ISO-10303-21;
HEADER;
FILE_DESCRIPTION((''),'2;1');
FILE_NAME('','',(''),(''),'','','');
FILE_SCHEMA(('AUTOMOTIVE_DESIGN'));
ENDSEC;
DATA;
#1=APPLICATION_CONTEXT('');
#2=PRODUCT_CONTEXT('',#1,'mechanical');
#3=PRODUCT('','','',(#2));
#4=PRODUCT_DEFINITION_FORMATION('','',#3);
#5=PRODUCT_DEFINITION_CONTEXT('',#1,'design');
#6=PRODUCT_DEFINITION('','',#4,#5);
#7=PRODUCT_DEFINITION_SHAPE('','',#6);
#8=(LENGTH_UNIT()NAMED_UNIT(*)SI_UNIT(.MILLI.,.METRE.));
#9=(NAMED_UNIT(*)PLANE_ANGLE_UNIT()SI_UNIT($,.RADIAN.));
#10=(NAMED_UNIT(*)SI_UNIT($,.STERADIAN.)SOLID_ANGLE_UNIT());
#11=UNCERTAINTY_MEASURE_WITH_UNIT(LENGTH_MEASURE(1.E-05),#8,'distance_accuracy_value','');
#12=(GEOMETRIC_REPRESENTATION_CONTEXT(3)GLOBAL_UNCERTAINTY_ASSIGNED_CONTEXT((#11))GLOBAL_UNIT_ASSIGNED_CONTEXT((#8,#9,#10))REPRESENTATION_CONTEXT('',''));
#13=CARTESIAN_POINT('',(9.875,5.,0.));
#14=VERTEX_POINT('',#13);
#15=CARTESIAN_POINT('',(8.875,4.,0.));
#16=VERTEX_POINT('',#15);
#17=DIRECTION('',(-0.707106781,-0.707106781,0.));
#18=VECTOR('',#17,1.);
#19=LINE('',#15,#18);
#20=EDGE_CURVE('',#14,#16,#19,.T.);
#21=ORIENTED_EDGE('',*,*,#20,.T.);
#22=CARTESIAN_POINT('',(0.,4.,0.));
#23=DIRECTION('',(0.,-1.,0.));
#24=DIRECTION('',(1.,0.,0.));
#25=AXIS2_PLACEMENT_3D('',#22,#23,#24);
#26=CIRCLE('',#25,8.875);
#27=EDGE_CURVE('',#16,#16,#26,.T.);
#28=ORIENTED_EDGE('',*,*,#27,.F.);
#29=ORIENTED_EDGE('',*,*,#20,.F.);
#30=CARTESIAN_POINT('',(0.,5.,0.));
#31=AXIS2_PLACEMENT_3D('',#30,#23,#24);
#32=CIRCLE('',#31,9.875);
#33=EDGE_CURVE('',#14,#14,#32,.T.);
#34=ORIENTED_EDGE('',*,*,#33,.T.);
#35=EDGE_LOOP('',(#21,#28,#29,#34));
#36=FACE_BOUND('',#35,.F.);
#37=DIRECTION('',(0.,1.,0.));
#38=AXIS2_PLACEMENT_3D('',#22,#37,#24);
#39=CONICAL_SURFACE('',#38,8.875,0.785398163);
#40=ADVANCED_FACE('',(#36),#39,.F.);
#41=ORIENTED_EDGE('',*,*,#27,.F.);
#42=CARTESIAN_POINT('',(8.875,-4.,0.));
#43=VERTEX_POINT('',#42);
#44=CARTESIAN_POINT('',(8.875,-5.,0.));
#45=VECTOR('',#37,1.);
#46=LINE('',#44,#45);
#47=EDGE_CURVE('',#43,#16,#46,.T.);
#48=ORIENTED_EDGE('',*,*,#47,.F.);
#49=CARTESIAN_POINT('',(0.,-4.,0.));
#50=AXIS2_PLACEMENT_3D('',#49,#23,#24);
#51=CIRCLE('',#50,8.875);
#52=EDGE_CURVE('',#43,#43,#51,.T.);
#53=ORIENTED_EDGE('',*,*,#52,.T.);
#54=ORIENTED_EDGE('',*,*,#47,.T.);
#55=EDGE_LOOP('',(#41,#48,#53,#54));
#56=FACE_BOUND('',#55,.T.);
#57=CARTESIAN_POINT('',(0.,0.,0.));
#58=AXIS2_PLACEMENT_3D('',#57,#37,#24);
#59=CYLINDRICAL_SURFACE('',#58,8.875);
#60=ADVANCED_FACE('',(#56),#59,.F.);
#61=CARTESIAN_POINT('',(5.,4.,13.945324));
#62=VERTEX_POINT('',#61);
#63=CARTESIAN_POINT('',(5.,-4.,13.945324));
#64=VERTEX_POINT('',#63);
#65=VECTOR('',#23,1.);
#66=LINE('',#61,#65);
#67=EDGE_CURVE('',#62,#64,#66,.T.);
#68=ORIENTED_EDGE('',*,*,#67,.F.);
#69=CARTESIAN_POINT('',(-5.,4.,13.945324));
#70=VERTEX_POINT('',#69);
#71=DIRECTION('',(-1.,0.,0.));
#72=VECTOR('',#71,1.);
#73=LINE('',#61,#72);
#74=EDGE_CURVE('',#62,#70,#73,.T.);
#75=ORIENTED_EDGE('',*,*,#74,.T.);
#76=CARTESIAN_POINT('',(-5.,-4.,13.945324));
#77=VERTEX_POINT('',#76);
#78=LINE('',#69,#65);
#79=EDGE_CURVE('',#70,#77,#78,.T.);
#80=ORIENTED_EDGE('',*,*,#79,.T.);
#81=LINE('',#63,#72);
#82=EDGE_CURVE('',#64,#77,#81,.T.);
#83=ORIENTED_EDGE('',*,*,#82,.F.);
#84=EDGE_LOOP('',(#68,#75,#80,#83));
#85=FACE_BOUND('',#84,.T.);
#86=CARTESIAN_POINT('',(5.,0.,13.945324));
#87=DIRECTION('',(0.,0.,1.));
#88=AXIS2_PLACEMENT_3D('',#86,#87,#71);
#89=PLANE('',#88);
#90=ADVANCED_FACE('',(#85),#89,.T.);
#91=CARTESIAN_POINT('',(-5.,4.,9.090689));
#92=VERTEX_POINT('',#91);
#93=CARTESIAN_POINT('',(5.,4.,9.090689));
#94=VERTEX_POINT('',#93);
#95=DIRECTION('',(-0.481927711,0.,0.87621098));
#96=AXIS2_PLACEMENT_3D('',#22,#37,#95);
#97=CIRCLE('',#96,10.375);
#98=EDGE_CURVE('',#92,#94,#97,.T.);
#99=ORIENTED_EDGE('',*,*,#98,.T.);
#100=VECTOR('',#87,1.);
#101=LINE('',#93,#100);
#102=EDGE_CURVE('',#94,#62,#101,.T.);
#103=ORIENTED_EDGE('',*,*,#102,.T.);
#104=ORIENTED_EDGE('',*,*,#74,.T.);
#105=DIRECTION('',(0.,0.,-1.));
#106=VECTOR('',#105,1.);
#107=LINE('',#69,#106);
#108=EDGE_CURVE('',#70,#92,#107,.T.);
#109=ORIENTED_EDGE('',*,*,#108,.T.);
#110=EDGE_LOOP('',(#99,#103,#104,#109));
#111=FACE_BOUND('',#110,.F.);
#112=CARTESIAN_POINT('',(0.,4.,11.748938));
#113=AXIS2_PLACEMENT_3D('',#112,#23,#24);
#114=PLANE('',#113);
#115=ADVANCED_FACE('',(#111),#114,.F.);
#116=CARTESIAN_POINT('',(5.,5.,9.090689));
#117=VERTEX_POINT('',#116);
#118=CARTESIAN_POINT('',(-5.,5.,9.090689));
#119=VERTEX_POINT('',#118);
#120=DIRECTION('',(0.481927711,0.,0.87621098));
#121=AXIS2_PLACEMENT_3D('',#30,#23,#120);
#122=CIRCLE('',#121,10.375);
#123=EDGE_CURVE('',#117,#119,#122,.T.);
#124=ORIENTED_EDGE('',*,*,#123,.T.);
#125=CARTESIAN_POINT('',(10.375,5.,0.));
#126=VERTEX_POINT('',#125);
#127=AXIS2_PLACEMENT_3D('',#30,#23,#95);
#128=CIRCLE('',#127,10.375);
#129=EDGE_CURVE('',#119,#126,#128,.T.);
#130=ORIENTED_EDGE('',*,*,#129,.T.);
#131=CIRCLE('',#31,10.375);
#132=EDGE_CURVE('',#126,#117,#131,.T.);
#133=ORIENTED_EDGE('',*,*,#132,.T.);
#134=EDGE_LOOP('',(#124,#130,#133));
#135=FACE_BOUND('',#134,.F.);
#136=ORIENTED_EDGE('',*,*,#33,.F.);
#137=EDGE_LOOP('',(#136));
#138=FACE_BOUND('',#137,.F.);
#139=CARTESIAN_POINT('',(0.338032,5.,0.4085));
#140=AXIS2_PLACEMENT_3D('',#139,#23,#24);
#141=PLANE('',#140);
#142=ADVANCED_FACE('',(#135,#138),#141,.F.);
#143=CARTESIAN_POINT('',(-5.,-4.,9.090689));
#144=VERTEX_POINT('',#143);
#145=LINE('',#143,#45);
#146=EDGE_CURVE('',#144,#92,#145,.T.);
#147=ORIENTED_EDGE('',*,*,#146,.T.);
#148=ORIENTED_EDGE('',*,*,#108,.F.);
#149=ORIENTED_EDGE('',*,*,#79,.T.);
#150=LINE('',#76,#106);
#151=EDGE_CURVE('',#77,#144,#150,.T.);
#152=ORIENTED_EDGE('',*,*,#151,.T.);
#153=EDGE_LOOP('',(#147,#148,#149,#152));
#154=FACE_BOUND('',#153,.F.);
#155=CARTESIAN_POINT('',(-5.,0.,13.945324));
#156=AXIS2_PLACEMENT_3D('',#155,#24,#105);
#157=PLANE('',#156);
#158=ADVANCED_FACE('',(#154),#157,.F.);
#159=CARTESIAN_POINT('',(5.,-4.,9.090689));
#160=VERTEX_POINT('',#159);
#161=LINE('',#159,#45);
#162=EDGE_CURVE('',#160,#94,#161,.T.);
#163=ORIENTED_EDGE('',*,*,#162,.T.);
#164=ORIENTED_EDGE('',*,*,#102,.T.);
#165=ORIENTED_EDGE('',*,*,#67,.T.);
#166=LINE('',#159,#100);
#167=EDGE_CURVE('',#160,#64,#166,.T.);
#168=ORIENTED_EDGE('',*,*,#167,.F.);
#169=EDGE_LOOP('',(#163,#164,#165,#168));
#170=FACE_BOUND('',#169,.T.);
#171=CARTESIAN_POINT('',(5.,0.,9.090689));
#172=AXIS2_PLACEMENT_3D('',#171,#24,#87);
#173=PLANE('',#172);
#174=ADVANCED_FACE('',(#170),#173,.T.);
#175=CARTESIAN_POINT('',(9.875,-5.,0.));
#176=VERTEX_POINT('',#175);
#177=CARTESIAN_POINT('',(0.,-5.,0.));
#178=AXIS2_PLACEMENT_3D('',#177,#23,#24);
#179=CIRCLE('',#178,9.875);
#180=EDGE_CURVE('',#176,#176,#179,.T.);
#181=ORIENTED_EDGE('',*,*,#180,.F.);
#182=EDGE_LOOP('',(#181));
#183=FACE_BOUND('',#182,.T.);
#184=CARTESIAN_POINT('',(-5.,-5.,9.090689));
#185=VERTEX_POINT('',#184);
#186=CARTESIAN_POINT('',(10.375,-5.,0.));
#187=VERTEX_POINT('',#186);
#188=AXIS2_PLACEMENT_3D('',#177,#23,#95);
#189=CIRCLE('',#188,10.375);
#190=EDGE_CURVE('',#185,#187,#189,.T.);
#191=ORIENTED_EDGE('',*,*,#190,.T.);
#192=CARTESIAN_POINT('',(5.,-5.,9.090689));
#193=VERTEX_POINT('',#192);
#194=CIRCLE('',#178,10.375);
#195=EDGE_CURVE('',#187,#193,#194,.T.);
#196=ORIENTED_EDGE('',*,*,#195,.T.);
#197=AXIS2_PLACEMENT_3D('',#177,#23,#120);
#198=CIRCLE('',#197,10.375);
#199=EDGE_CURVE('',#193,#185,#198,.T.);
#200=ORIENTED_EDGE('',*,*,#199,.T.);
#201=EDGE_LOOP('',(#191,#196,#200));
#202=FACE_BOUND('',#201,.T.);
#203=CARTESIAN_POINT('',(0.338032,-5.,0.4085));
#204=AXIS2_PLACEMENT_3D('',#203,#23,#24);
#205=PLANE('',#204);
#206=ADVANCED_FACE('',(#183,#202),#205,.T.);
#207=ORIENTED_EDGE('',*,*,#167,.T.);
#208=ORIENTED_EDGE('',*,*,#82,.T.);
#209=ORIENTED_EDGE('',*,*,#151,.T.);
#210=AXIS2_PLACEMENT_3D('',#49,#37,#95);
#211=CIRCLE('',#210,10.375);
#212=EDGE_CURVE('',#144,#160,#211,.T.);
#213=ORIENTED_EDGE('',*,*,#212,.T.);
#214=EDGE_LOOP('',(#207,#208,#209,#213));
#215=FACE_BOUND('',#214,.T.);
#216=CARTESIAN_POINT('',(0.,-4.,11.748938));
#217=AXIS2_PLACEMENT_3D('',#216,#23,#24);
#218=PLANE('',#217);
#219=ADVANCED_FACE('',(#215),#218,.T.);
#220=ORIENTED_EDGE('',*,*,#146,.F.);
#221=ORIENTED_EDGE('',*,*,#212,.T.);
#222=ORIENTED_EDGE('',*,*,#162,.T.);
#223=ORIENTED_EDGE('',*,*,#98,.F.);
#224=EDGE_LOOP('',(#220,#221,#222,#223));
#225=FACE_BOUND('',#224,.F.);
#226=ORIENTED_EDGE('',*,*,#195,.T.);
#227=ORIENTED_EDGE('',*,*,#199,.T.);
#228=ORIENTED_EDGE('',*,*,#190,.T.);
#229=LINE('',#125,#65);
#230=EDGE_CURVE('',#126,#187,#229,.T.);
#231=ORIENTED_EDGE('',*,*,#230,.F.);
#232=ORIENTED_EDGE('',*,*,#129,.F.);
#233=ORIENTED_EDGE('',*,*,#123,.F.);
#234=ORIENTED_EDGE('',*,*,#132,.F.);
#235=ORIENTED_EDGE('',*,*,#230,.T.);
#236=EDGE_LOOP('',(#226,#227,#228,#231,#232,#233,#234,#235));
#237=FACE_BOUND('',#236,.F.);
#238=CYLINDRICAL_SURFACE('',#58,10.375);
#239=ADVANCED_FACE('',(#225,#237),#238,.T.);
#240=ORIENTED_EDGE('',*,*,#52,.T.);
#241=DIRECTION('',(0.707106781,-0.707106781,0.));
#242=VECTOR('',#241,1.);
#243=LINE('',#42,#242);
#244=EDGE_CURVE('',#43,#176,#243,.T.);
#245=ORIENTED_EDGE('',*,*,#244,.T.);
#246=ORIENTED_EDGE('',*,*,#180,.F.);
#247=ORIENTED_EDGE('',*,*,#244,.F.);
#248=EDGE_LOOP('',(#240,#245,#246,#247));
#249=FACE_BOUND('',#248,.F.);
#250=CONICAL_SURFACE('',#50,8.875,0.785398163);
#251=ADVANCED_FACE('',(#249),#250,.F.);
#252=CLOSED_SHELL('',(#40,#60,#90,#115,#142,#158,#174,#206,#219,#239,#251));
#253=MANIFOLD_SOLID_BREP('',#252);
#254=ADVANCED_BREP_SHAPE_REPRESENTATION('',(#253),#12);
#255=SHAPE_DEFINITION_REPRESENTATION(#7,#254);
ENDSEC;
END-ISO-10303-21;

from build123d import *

# Parameters (mm, degrees)
F0_R          = 8.875
F1_DEPTH      = 5
F1_DEPTH_BACK = 5
F2_DEPTH      = 4
F2_DEPTH_BACK = 4
F3_SIZE       = 1


# Not quite as in the source:
# - a feature names something its author has since deleted; it is built from what else it names


with BuildPart() as f1:
    # F0 (on Front) → F1 (new body, two sides)
    with BuildSketch(Plane.XZ) as f1_sk:
        with BuildLine():
            ThreePointArc((-5, 9.0906889178), (-5.2804178338, -8.9307229551), (10.375, 0))
            ThreePointArc((10.375, 0), (8.9307229551, 5.2804178338), (5, 9.0906889178))
            Line((5, 9.0906889178), (5, 8.9453239366))
            Line((5, 8.9453239366), (-5, 8.9453239366))
            Line((-5, 8.9453239366), (-5, 9.0906889178))
        make_face()
        Circle(F0_R, mode=Mode.SUBTRACT)
        with BuildLine():
            Line((5, 8.9453239366), (5, 9.0906889178))
            ThreePointArc((5, 9.0906889178), (0, 10.375), (-5, 9.0906889178))
            Line((-5, 9.0906889178), (-5, 8.9453239366))
            Line((-5, 8.9453239366), (5, 8.9453239366))
        make_face()
    extrude(amount=F1_DEPTH)
    extrude(f1_sk.sketch, amount=-F1_DEPTH_BACK)

    # F0 (on Front) → F2 (join, two sides)
    with BuildSketch(Plane.XZ) as f2_sk:
        with BuildLine():
            ThreePointArc((-5, 9.0906889178), (0, 10.375), (5, 9.0906889178))
            Line((5, 9.0906889178), (5, 13.9453239366))
            Line((5, 13.9453239366), (-5, 13.9453239366))
            Line((-5, 13.9453239366), (-5, 9.0906889178))
        make_face()
    extrude(amount=F2_DEPTH)
    extrude(f2_sk.sketch, amount=-F2_DEPTH_BACK)

    # F3
    f3_edges = [f1.edges().sort_by_distance(p)[0] for p in [
        (-8.875, 5, 0),
        (-8.875, -5, 0),
    ]]
    chamfer(f3_edges, length=F3_SIZE)


solid = f1.part
